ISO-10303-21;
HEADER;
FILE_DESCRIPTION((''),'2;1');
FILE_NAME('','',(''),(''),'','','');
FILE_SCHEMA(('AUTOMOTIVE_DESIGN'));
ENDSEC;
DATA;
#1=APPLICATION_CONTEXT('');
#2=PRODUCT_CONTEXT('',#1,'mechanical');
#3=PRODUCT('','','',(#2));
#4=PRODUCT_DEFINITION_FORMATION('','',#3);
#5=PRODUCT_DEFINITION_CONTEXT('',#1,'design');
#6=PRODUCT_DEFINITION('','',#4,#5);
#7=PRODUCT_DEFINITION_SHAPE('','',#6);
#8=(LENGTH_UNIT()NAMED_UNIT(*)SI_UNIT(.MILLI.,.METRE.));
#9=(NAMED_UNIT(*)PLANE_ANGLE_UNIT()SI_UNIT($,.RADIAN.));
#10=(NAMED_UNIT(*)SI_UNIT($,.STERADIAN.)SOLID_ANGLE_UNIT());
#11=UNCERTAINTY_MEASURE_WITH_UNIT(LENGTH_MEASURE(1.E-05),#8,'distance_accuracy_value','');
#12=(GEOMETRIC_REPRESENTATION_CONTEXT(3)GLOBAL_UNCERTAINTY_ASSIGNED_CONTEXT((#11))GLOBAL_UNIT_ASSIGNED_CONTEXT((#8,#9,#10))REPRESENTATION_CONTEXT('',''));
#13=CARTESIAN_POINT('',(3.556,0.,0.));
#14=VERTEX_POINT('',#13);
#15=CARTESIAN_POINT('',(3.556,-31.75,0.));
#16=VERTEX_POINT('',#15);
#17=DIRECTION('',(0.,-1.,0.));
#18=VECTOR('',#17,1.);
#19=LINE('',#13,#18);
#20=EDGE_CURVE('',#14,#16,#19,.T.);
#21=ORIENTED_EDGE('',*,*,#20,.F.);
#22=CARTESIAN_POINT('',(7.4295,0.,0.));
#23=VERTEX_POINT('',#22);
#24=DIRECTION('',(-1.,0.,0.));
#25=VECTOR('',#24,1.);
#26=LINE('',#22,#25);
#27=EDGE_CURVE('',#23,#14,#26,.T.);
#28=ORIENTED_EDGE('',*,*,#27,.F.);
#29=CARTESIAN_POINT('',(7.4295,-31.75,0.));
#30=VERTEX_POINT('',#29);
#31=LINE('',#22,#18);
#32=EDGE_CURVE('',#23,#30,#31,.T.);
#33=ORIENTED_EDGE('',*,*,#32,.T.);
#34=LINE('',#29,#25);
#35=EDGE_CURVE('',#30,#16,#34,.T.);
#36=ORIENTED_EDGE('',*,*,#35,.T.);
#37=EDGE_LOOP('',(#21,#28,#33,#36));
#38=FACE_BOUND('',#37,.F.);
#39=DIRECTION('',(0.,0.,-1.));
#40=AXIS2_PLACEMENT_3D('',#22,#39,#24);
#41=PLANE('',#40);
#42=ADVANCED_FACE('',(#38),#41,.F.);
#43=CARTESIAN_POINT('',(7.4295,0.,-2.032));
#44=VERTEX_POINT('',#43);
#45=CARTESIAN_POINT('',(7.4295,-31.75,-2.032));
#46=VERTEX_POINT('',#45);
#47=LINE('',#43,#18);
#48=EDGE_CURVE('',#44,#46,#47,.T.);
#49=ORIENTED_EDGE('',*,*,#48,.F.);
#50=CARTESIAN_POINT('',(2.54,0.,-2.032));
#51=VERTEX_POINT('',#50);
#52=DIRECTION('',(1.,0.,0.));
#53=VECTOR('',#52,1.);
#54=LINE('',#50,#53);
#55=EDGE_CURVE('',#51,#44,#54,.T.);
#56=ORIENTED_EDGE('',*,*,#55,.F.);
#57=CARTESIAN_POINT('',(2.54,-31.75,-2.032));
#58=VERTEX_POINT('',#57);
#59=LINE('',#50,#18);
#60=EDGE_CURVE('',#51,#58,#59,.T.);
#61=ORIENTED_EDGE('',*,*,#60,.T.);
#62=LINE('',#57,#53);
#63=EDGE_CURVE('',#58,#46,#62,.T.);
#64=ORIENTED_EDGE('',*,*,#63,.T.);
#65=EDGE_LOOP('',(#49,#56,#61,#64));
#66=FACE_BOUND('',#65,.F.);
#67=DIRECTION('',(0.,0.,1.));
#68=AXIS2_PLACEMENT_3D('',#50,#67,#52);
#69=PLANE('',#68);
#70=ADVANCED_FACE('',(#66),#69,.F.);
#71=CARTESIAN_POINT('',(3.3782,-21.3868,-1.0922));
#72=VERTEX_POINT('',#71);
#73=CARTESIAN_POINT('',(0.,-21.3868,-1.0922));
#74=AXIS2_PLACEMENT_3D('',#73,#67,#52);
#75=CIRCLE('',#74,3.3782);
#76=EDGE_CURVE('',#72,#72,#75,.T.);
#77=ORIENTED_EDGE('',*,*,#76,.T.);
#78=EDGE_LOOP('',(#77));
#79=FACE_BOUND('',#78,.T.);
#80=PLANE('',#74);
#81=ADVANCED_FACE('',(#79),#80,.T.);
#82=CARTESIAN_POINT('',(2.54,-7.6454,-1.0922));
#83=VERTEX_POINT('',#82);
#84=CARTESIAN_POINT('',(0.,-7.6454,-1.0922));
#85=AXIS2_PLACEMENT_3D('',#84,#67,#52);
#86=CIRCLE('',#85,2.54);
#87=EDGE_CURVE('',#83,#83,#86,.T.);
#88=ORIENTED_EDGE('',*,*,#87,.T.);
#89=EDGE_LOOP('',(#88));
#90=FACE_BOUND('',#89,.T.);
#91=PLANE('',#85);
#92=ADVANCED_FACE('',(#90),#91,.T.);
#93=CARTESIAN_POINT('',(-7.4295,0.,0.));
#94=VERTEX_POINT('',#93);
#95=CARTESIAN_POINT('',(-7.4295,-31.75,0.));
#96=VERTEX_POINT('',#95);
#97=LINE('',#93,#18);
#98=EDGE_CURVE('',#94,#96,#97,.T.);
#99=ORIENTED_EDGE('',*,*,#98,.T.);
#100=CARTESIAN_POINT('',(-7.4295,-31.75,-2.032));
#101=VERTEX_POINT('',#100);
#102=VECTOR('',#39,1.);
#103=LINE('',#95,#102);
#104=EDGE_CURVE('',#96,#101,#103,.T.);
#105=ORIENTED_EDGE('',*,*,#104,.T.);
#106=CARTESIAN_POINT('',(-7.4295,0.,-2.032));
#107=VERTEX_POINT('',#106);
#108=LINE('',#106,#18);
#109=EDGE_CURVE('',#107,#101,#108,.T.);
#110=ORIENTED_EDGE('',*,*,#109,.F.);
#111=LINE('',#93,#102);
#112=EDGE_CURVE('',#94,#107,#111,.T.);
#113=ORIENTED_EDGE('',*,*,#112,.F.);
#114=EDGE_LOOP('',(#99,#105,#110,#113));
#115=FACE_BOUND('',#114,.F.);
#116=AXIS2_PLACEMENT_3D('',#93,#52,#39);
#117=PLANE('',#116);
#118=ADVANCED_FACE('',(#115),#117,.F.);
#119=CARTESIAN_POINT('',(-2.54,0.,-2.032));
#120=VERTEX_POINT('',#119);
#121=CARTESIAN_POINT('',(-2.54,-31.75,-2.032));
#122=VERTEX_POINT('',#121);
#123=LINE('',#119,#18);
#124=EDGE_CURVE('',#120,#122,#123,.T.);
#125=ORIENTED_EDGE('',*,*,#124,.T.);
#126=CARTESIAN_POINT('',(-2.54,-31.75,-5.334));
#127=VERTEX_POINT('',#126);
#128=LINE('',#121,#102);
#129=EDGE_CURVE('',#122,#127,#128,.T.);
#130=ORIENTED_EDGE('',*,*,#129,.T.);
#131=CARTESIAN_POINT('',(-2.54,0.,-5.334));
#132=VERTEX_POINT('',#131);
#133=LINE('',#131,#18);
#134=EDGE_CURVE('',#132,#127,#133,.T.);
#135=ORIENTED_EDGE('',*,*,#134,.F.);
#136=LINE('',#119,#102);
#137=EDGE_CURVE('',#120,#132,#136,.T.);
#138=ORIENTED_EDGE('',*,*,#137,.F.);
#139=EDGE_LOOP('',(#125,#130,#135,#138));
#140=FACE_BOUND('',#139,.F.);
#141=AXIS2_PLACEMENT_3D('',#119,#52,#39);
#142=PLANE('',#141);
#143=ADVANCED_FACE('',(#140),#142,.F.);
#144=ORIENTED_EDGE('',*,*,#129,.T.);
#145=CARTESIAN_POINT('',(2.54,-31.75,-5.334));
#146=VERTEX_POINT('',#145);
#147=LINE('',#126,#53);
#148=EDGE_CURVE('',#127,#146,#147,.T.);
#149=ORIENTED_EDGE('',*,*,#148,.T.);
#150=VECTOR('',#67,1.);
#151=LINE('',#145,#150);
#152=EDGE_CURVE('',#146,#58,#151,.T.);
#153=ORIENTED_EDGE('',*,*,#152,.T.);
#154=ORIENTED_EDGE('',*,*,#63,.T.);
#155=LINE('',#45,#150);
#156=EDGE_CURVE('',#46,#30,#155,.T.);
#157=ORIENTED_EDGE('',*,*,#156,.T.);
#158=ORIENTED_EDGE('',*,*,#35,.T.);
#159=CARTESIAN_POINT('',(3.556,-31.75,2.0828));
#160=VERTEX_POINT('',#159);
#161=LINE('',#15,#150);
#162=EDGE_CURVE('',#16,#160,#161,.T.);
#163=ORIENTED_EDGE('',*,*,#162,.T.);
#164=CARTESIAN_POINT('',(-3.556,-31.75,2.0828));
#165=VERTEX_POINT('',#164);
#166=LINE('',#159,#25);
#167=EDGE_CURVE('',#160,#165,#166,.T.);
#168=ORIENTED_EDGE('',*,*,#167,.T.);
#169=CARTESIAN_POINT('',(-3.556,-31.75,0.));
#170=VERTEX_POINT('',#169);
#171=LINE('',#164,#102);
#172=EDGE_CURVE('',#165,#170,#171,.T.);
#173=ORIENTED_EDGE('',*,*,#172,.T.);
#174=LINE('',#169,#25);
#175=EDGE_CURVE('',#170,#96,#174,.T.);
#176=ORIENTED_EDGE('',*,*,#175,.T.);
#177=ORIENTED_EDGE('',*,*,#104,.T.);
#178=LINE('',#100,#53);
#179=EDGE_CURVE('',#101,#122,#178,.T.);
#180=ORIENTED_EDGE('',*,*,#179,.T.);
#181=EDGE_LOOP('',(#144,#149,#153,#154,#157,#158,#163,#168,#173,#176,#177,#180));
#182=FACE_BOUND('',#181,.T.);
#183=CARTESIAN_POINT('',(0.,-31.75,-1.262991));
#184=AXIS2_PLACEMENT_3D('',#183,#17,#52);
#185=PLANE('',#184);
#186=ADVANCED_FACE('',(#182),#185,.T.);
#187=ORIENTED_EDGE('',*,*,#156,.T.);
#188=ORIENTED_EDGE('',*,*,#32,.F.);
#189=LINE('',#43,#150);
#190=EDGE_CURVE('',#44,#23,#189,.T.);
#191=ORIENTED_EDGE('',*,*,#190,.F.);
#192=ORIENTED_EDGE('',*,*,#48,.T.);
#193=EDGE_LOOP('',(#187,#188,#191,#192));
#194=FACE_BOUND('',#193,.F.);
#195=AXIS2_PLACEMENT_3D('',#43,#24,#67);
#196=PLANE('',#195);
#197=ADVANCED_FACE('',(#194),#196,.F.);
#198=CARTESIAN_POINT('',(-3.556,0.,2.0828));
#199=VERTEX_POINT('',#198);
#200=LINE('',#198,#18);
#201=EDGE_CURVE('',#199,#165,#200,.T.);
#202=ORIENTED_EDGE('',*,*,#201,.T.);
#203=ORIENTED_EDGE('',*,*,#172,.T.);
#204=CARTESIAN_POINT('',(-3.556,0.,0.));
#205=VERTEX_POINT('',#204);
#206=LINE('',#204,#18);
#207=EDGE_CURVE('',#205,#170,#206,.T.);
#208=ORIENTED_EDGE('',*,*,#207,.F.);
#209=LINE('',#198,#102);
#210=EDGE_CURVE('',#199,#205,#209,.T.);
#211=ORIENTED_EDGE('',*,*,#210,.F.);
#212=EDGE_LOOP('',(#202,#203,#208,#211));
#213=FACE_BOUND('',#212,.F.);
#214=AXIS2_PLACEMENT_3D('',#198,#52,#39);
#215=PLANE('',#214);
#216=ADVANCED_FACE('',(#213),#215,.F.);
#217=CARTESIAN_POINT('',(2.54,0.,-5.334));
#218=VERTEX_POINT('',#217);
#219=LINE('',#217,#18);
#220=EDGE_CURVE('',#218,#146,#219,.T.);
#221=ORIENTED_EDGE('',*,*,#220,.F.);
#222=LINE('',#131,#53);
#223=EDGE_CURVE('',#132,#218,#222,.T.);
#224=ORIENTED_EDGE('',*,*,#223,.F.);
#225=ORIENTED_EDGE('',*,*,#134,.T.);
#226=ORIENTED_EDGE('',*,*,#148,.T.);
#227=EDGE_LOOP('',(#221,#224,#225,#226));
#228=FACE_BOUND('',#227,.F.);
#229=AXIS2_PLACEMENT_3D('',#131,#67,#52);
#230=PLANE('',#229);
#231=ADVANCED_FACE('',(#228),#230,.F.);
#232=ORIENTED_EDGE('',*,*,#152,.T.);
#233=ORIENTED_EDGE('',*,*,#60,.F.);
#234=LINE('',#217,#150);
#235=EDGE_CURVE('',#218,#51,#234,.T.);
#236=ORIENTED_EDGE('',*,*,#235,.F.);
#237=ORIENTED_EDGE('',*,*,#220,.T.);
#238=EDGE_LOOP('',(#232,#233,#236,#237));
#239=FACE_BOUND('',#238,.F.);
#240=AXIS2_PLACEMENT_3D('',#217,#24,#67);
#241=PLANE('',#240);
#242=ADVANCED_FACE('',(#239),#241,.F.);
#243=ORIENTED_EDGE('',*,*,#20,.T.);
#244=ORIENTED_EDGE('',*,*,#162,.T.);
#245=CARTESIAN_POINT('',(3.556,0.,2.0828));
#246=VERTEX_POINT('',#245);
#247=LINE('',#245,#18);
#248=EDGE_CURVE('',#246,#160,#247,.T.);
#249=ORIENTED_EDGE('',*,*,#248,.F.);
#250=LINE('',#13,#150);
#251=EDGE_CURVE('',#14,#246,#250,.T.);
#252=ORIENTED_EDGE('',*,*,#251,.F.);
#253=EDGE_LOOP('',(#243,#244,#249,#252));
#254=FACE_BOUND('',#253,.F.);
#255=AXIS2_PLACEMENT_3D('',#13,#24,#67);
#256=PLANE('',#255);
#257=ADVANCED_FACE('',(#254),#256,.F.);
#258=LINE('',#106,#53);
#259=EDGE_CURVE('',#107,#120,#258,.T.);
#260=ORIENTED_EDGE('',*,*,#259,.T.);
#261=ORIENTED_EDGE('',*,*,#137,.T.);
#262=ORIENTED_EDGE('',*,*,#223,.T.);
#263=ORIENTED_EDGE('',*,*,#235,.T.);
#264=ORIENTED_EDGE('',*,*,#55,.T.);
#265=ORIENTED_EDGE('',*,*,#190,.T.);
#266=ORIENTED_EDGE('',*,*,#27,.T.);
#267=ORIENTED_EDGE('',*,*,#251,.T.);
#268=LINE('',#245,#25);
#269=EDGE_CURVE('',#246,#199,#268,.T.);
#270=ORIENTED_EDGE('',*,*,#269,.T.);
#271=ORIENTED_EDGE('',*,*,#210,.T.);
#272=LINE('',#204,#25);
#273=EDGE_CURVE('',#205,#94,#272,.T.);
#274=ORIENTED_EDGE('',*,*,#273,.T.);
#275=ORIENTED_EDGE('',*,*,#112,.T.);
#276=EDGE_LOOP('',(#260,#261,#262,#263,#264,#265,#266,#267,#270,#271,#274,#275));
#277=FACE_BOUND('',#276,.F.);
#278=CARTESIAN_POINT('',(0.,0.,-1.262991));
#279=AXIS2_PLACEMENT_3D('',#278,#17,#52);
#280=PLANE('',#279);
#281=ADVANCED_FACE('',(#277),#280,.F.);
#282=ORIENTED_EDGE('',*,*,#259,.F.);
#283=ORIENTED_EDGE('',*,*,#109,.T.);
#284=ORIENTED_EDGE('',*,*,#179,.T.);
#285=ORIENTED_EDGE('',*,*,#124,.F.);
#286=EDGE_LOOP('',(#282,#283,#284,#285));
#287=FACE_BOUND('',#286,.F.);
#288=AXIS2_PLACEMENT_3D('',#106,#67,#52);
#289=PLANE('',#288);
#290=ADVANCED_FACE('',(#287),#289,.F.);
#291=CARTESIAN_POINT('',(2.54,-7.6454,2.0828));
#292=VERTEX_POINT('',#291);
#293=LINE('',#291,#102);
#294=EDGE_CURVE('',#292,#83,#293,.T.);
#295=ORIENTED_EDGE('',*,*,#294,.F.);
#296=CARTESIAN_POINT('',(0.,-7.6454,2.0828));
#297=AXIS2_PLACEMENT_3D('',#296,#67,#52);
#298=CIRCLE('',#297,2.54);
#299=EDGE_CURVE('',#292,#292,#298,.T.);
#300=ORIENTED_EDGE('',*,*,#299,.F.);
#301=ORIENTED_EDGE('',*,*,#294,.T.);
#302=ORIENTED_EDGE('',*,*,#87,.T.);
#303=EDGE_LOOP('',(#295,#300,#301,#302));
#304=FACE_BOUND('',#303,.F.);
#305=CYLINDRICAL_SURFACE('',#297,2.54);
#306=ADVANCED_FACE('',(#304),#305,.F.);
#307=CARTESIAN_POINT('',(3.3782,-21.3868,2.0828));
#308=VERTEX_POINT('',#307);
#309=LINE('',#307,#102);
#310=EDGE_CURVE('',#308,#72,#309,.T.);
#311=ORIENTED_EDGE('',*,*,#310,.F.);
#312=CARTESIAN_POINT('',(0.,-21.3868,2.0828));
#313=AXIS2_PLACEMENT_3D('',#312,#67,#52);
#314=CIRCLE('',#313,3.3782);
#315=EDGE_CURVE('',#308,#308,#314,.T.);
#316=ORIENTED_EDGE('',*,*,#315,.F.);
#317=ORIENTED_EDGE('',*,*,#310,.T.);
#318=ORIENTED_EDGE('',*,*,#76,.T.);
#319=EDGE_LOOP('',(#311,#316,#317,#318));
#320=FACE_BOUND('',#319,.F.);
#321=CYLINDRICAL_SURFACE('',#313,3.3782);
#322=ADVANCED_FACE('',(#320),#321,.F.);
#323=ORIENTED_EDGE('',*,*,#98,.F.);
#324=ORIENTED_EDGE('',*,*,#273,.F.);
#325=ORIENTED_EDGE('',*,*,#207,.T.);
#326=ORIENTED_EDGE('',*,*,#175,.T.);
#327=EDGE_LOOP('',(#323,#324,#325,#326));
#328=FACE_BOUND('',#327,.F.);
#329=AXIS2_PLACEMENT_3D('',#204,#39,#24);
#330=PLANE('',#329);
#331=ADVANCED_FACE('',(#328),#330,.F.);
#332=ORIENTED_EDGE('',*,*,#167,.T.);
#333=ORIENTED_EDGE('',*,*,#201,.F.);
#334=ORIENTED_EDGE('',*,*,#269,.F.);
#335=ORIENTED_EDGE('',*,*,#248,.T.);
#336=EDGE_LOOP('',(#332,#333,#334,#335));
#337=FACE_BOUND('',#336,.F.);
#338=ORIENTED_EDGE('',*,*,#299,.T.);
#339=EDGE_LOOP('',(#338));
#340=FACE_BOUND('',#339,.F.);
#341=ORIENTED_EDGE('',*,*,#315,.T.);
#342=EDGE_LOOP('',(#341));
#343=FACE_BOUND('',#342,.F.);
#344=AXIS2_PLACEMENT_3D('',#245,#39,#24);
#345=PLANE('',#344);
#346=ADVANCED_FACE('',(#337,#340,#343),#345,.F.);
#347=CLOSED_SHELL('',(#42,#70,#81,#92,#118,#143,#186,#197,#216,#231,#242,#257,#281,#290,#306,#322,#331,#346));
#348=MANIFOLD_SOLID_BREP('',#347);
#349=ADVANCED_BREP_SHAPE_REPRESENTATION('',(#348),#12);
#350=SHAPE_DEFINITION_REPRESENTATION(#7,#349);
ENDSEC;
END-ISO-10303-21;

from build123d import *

# Parameters (mm, degrees)
F1_DEPTH = 31.75
F2_R     = 3.3782
F2_R_2   = 2.54
F3_DEPTH = 3.175


# Not quite as in the source:
# - a feature names something its author has since deleted; it is built from what else it names


with BuildPart() as f1:
    # F0 (on Front) → F1 (new body)
    with BuildSketch(Plane.XZ):
        Polygon((3.556, 2.0828), (-3.556, 2.0828), (-3.556, 0), (-7.4295, 0), (-7.4295, -2.032), (-2.54, -2.032), (-2.54, -5.334), (2.54, -5.334), (2.54, -2.032), (7.4295, -2.032), (7.4295, 0), (3.556, 0), align=None)
    extrude(amount=F1_DEPTH)

    # F2 (on face) → F3 (cut)
    with BuildSketch(Plane.XY.offset(2.0828)):
        with Locations((0, -21.3868)):
            Circle(F2_R)
        with Locations((0, -7.6454)):
            Circle(F2_R_2)
    extrude(amount=-F3_DEPTH, mode=Mode.SUBTRACT)


solid = f1.part
